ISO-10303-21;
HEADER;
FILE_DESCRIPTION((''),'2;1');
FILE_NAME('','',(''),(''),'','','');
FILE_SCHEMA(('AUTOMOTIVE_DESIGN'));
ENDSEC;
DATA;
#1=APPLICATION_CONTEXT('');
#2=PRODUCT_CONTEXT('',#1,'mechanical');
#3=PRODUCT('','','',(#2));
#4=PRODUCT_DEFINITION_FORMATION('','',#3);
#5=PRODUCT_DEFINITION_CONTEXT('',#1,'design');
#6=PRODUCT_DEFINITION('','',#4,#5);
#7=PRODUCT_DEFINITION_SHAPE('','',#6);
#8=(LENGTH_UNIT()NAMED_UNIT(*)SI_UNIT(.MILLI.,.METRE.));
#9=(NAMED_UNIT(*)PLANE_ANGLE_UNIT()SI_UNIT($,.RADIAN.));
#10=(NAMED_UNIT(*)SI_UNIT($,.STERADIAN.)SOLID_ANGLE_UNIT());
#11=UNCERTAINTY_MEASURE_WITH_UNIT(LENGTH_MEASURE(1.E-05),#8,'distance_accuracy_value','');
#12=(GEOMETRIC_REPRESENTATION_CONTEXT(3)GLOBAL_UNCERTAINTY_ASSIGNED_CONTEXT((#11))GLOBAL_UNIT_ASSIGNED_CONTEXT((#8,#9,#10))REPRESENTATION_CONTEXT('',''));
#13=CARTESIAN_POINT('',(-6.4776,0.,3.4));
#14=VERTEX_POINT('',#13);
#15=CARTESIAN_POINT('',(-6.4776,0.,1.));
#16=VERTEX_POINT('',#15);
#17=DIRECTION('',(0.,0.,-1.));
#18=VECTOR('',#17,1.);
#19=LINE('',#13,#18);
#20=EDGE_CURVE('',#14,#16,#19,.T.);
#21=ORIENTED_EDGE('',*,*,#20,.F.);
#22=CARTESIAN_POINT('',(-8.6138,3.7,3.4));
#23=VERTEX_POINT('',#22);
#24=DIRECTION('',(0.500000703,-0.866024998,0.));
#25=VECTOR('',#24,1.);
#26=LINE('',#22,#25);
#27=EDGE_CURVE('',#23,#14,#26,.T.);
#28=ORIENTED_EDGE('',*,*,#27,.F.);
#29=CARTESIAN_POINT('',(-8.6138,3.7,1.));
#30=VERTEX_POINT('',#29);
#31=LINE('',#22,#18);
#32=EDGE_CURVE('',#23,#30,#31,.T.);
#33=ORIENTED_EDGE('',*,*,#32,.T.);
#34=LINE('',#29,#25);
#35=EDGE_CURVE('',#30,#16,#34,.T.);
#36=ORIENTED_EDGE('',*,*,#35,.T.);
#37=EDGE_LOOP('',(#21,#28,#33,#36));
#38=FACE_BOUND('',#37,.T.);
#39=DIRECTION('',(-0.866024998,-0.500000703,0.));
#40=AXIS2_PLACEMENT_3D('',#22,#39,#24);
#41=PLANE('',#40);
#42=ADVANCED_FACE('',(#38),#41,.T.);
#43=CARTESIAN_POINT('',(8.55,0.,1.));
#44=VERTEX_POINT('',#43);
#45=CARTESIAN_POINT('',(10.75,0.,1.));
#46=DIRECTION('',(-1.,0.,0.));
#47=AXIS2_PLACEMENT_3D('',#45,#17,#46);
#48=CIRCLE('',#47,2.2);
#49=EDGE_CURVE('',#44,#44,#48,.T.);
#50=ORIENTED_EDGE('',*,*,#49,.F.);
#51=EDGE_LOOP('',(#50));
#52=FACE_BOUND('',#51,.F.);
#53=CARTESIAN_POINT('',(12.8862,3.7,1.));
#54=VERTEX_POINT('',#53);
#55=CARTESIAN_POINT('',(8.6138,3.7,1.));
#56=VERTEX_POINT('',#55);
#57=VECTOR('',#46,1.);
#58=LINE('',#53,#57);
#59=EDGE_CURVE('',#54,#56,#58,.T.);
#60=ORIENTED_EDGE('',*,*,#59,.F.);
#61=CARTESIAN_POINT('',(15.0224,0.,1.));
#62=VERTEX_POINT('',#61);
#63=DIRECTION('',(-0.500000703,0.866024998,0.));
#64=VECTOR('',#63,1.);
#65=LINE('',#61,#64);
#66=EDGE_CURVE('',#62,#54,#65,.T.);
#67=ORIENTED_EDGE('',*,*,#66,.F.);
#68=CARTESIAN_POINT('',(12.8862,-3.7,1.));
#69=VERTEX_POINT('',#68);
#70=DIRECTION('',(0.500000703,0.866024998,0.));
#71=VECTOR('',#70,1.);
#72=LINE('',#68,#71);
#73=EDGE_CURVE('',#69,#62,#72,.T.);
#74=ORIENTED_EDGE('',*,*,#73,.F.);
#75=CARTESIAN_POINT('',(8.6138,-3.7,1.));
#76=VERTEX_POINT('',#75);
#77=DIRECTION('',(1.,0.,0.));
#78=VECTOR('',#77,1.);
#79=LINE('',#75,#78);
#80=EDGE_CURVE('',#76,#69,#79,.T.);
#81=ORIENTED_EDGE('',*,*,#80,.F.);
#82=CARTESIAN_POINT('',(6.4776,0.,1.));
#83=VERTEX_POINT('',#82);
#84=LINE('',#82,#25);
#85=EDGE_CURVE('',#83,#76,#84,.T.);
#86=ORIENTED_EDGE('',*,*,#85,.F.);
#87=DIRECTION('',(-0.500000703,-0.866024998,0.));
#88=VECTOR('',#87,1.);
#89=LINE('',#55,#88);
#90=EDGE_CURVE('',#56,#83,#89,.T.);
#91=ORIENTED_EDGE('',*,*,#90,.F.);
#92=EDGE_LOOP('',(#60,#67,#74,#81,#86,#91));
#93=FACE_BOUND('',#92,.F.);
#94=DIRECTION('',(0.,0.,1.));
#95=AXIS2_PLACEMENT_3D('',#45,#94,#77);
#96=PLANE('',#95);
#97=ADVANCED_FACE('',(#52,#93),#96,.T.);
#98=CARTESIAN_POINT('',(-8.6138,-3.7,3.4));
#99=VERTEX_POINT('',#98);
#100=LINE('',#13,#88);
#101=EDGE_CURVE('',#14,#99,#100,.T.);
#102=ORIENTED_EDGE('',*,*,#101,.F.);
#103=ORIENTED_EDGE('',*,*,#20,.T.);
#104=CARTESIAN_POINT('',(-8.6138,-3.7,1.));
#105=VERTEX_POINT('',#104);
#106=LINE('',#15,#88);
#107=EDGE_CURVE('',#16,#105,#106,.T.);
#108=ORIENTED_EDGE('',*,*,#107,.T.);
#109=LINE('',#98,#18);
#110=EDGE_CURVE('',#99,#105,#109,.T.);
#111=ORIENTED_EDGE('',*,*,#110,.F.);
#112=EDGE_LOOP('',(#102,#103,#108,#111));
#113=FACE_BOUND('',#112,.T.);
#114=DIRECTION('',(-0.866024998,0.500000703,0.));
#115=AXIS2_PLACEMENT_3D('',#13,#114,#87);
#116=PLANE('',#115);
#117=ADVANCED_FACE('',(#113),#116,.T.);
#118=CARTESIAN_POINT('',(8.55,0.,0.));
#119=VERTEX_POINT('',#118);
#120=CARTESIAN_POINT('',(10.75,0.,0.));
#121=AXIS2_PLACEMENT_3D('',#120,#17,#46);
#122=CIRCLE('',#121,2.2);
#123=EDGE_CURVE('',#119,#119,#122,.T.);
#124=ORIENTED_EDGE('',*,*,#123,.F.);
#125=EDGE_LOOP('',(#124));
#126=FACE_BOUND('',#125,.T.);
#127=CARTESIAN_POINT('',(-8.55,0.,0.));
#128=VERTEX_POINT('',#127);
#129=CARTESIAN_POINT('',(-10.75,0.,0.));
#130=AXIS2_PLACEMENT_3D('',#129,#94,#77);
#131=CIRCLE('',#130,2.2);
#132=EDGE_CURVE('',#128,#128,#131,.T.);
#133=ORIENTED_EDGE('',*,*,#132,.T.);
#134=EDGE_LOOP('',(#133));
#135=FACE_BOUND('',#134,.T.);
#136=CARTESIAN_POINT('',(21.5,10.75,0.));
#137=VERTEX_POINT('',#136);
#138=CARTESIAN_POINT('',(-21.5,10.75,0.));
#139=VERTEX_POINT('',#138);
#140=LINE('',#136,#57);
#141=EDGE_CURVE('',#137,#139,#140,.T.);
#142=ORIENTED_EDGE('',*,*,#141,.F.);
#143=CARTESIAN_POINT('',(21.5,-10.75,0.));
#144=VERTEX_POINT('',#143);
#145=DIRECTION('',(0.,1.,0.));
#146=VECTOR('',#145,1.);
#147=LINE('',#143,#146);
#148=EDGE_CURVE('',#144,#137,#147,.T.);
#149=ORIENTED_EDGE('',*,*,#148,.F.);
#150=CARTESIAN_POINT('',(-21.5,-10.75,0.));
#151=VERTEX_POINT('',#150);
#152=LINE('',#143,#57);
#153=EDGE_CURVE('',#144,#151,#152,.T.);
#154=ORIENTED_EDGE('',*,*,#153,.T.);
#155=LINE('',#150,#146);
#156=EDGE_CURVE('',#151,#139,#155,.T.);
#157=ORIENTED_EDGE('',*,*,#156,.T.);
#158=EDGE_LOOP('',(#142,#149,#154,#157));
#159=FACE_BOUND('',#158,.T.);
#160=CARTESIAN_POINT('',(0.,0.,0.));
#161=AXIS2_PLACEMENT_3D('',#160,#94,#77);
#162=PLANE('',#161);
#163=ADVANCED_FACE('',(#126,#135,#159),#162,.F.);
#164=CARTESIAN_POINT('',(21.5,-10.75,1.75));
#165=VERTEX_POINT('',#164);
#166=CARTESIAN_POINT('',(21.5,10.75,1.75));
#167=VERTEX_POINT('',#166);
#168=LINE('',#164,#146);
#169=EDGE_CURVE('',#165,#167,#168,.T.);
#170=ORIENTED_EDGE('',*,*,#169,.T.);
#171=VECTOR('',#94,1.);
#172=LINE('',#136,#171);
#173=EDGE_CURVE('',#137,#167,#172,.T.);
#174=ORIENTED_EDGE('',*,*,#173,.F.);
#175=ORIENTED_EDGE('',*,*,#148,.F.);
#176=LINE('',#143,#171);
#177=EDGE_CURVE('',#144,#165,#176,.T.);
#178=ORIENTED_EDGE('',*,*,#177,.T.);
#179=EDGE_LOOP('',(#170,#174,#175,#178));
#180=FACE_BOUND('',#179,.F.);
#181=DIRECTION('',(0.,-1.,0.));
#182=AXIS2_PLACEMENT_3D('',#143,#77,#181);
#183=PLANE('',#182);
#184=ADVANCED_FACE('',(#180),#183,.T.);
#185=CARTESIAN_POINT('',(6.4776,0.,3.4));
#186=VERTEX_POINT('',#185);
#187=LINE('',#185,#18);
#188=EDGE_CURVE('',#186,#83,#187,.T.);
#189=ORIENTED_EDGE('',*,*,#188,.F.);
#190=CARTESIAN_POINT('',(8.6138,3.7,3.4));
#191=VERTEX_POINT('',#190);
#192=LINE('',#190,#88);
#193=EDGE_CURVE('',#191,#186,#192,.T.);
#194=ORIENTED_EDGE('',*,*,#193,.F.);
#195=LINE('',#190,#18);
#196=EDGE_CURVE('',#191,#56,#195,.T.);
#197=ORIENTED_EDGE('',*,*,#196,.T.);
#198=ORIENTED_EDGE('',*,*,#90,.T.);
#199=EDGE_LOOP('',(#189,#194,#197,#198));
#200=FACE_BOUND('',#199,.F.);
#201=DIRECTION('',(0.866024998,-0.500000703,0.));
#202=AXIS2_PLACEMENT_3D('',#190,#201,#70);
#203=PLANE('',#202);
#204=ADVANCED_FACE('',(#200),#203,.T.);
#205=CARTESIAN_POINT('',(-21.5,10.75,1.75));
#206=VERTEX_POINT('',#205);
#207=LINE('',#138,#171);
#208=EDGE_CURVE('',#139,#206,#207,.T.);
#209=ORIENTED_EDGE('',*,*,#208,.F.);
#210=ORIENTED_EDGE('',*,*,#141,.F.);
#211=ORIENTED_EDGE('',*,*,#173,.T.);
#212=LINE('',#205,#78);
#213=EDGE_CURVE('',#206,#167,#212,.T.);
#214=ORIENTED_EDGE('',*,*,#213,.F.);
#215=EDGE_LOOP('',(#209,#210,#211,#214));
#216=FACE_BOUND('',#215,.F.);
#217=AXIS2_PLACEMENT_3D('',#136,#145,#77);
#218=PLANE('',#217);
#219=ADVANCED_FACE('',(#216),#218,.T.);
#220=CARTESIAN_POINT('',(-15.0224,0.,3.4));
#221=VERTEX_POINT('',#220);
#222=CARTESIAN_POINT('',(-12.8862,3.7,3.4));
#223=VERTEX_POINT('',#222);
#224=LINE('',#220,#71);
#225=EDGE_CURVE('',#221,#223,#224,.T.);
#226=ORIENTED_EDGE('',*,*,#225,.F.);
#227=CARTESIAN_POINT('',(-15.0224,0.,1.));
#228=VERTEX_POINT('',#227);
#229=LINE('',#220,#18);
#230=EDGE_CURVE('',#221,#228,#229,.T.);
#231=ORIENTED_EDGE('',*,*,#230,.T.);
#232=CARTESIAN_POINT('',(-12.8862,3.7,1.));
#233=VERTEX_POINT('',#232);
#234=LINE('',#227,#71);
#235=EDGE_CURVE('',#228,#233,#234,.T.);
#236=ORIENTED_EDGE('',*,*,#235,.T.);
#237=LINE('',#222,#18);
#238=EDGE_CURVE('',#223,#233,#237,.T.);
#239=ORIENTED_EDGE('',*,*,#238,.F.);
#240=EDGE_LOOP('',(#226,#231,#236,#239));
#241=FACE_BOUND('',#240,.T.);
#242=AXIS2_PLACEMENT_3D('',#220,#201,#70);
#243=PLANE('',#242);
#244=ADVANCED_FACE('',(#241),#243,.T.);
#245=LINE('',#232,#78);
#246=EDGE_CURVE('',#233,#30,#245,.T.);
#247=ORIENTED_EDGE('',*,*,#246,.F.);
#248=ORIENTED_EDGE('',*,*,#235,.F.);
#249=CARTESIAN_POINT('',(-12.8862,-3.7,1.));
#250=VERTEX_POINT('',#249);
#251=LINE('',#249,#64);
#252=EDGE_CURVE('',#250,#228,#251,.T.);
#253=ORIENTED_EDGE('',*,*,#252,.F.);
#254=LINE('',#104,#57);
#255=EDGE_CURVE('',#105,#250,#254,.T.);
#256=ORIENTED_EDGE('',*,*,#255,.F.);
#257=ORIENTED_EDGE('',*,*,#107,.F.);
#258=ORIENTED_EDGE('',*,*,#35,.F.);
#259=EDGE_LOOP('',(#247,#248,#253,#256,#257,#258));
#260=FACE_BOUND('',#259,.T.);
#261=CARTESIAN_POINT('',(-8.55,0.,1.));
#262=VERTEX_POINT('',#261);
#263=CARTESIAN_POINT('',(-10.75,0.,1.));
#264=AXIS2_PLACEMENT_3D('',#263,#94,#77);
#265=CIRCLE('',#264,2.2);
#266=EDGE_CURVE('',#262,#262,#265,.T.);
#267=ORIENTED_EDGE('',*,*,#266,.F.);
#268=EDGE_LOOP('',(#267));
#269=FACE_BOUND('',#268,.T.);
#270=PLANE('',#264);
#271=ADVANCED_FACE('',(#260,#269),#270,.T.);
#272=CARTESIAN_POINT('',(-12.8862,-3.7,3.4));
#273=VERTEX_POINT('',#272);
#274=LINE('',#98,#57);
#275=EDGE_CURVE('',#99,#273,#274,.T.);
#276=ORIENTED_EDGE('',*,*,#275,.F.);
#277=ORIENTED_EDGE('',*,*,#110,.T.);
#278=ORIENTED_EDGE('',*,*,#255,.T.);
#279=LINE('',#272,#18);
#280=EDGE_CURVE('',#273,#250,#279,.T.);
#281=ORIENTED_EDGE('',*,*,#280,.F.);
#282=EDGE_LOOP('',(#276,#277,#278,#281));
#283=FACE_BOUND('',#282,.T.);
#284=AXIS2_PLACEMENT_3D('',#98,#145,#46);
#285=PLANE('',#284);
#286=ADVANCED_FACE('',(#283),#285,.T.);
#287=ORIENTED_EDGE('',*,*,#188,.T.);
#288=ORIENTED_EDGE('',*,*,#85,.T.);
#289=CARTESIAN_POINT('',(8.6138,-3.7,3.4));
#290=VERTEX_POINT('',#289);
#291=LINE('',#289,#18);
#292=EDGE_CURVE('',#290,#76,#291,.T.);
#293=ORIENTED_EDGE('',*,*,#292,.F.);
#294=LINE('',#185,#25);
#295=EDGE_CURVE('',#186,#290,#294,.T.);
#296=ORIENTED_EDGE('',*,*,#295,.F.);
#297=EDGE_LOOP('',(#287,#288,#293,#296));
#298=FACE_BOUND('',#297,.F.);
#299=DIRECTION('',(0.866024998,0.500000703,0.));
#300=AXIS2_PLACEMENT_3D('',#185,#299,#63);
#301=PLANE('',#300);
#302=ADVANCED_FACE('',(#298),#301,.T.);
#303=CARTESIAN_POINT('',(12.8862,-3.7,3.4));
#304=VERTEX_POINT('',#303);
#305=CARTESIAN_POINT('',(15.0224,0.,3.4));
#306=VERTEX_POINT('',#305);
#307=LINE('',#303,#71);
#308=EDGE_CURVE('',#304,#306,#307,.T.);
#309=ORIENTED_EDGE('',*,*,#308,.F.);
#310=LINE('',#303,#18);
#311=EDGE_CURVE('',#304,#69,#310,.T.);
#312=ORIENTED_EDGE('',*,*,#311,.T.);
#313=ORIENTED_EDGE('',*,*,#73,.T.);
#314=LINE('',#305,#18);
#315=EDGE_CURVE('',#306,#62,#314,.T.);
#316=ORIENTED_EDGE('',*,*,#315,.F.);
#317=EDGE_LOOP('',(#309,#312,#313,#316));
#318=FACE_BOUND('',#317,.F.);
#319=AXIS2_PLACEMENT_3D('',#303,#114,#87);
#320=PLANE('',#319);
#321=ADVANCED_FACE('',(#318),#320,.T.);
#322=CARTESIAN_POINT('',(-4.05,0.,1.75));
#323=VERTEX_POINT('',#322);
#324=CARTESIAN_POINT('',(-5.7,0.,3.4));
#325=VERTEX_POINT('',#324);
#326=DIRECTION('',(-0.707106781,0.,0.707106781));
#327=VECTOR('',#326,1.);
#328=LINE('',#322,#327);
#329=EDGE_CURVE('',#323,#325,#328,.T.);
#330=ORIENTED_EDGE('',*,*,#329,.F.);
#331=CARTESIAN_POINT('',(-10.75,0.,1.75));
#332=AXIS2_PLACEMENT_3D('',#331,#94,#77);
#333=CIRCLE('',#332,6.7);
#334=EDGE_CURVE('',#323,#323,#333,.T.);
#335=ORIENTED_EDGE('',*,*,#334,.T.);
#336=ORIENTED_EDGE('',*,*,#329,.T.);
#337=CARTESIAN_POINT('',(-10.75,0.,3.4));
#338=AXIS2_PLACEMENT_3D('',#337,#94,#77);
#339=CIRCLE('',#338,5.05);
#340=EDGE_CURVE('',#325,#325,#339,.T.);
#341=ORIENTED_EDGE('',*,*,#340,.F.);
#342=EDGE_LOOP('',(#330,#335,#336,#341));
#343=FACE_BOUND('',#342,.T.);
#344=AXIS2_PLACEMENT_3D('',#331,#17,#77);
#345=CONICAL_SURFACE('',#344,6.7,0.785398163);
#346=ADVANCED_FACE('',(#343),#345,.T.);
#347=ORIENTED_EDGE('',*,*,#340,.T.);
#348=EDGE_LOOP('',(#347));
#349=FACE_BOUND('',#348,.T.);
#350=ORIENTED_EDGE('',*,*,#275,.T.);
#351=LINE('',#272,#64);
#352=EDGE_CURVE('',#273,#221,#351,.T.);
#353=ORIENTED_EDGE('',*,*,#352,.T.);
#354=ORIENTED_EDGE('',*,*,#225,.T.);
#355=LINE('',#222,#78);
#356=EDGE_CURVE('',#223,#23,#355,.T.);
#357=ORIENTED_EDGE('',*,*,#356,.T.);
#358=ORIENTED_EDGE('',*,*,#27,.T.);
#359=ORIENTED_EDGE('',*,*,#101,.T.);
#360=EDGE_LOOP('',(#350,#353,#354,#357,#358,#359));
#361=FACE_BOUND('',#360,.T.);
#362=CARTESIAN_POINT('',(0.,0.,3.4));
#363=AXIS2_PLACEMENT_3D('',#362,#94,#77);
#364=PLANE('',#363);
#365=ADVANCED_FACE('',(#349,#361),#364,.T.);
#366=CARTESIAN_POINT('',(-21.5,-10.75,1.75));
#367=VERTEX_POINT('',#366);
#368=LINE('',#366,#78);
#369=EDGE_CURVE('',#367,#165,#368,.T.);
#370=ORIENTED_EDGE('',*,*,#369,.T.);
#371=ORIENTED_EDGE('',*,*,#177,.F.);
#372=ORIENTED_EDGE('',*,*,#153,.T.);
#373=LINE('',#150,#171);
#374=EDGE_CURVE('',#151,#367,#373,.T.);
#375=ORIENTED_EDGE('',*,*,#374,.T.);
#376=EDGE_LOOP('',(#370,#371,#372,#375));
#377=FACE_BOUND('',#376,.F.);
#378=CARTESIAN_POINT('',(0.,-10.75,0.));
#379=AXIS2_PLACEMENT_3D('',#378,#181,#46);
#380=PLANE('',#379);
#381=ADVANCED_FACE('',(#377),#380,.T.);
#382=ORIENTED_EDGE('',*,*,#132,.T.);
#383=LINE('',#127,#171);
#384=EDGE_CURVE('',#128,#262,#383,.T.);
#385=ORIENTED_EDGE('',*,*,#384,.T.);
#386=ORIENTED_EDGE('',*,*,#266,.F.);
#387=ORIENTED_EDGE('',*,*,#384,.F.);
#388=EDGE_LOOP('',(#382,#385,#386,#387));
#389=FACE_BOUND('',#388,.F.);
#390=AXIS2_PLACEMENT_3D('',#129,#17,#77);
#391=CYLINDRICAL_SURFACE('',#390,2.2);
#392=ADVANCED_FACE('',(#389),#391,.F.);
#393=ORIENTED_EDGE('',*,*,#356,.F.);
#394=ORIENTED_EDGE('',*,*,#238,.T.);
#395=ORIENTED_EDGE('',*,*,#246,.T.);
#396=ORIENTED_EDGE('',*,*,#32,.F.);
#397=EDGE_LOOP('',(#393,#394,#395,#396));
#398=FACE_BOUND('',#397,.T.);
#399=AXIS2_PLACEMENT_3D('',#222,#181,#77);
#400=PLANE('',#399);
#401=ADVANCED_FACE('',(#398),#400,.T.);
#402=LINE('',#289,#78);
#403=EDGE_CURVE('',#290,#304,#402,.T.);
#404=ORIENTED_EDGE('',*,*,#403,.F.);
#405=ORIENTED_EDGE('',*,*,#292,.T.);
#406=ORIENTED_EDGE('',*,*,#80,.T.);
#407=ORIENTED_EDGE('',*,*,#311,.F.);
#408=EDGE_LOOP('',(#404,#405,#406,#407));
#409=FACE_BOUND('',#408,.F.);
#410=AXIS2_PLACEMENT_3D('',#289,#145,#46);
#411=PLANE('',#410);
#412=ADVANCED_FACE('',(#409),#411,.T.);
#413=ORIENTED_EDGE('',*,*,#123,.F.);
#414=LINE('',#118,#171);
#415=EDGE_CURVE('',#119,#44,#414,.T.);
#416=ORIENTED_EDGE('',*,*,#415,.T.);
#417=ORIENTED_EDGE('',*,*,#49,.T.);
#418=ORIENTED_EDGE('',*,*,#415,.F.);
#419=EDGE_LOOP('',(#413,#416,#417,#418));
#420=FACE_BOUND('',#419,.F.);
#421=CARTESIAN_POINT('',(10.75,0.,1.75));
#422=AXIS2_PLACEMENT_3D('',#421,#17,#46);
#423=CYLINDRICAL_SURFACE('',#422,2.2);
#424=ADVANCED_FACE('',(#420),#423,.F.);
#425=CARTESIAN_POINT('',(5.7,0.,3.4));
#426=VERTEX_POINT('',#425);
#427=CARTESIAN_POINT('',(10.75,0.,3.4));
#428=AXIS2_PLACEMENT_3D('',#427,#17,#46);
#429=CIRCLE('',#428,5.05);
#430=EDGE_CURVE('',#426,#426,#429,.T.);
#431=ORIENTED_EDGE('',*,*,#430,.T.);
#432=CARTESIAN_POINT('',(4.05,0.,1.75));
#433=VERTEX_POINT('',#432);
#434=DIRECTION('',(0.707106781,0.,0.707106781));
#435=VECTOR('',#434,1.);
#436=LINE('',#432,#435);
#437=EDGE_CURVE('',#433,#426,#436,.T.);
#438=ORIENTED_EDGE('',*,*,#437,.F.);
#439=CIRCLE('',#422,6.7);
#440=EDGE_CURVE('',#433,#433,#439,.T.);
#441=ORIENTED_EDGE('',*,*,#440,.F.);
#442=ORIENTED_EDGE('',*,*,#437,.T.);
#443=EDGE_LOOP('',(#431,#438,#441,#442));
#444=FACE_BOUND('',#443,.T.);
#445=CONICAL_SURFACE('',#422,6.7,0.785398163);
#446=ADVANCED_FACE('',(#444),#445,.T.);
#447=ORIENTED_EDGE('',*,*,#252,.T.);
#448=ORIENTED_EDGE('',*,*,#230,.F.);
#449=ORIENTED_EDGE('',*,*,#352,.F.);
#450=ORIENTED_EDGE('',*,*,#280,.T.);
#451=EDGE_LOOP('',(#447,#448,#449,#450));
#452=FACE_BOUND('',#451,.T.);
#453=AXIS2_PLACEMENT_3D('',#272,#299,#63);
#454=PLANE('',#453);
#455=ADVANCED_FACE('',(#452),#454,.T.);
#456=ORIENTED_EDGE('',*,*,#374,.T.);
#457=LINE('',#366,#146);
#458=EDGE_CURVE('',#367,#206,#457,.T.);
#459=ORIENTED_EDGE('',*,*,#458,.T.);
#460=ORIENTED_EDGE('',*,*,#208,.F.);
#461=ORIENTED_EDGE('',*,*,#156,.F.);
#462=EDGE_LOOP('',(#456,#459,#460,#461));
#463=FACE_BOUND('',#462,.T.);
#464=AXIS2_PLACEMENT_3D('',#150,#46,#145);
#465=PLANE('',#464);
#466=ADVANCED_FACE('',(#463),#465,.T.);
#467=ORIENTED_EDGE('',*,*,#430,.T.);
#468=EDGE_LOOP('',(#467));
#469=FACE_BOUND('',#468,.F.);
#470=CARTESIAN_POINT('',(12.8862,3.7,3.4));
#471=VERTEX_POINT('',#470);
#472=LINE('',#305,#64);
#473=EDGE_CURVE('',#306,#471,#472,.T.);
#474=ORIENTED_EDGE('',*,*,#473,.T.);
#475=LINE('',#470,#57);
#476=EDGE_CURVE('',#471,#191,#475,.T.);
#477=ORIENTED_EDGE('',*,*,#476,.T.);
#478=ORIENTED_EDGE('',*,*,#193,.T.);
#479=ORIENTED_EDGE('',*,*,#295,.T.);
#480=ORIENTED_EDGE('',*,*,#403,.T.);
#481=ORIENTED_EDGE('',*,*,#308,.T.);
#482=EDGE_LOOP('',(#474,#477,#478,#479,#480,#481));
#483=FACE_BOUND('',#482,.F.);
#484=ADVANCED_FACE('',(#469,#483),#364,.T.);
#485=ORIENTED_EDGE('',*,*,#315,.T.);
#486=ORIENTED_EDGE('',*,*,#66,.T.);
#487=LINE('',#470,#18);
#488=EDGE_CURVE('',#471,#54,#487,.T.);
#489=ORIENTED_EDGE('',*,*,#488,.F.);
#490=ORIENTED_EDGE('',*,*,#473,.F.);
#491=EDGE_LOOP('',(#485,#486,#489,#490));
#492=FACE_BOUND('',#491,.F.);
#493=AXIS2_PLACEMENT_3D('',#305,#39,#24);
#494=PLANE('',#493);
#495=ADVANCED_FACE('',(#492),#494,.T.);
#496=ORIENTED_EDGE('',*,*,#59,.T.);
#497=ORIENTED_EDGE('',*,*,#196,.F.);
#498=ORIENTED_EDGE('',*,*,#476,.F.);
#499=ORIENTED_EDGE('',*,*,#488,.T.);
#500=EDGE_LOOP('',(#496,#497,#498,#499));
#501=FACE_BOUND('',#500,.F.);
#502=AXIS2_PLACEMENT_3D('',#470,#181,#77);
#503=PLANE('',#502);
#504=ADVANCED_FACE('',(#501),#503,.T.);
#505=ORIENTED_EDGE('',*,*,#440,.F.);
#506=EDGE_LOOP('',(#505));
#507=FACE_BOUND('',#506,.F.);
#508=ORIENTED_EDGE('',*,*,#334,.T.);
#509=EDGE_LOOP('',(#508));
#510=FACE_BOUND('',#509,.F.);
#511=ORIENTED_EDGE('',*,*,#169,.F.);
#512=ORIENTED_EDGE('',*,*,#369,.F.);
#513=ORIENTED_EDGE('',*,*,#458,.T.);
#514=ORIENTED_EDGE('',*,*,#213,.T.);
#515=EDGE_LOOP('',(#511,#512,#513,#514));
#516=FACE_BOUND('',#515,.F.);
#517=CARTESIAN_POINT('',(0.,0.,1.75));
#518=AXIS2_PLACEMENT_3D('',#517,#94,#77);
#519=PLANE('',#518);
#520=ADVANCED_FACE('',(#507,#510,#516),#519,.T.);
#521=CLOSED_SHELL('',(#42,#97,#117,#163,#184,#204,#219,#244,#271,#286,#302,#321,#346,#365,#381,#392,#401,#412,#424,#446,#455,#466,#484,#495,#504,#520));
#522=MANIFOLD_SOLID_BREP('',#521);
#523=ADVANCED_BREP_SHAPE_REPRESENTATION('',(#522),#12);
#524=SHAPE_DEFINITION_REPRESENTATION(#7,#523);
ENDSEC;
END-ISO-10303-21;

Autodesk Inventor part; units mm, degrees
ref_plane "YZ Plane" through (0, 0, 0) normal (1, 0, 0) x (0, 1, 0)
ref_plane "XZ Plane" through (0, 0, 0) normal (0, 1, 0) x (-1, 0, 0)
ref_plane "XY Plane" through (0, 0, 0) normal (0, 0, 1) x (1, 0, 0)
sketch "Sketch4" plane through (0, 0, 0) normal (0, 0, 1) x (1, 0, 0)
  line L0 (-21.5, 10.75) -> (0, 10.75)
  line L1 (0, 10.75) -> (0, -10.75)
  line L2 (0, -10.75) -> (-21.5, -10.75)
  line L3 (-21.5, -10.75) -> (-21.5, 10.75)
  circle A0 centre (-10.75, 0) radius 2.2
  point P0 (0, 0)
  point P1 (-21.5, 0)
  point P2 (0, 0)
  point P3 (-10.75, 10.75)
  dimension "d12" = 21.5
  dimension "d13" = 21.5
  dimension "d14" = 4.4
extrude "Extrusion4" add sketch "Sketch4" along normal blind 1.75
sketch "Sketch5" plane through (0, 0, 1.75) normal (0, 0, 1) x (1, 0, 0)
  circle A0 centre (-10.75, 0) radius 2.2 projected
  circle A1 centre (-10.75, 0) radius 6.7
  point P0 (0, 0)
  dimension "d17" = 13.4
extrude "Extrusion5" add sketch "Sketch5" along normal blind 1.65
draft "FaceDraft2" angle 45 pull direction (0, 0, 1) faces at (-4.1368, -1.0748, 2.85) fixed edges at (-17.45, 0, 1.75)
sketch "Sketch6" plane through (-10.75, 0, 3.4) normal (0, 0, 1) x (1, 0, 0)
  circle A0 centre (0, 0) radius 2.2 projected
  circle A1 centre (0, 0) radius 5.05 projected
  line L0 (2.1362, -3.7) -> (-2.1362, -3.7)
  line L1 (-2.1362, -3.7) -> (-4.2724, 0)
  line L2 (-4.2724, 0) -> (-2.1362, 3.7)
  line L3 (-2.1362, 3.7) -> (2.1362, 3.7)
  line L4 (2.1362, 3.7) -> (4.2724, 0)
  line L5 (4.2724, 0) -> (2.1362, -3.7)
  line L6 (-10.75, 10.75) -> (10.75, 10.75) projected
  point P0 (10.75, 0)
  dimension "d21" = 7.4
extrude "Extrusion6" cut sketch "Sketch6" against normal blind 2.4 contours L0 L1 L2 L3 L4 L5
mirror "Mirror1" about plane through (0, 10.75, 0) normal (1, 0, 0) of "Extrusion4", "FaceDraft2", "Extrusion5", "Extrusion6"
properties part number "bracket_plastictube"
